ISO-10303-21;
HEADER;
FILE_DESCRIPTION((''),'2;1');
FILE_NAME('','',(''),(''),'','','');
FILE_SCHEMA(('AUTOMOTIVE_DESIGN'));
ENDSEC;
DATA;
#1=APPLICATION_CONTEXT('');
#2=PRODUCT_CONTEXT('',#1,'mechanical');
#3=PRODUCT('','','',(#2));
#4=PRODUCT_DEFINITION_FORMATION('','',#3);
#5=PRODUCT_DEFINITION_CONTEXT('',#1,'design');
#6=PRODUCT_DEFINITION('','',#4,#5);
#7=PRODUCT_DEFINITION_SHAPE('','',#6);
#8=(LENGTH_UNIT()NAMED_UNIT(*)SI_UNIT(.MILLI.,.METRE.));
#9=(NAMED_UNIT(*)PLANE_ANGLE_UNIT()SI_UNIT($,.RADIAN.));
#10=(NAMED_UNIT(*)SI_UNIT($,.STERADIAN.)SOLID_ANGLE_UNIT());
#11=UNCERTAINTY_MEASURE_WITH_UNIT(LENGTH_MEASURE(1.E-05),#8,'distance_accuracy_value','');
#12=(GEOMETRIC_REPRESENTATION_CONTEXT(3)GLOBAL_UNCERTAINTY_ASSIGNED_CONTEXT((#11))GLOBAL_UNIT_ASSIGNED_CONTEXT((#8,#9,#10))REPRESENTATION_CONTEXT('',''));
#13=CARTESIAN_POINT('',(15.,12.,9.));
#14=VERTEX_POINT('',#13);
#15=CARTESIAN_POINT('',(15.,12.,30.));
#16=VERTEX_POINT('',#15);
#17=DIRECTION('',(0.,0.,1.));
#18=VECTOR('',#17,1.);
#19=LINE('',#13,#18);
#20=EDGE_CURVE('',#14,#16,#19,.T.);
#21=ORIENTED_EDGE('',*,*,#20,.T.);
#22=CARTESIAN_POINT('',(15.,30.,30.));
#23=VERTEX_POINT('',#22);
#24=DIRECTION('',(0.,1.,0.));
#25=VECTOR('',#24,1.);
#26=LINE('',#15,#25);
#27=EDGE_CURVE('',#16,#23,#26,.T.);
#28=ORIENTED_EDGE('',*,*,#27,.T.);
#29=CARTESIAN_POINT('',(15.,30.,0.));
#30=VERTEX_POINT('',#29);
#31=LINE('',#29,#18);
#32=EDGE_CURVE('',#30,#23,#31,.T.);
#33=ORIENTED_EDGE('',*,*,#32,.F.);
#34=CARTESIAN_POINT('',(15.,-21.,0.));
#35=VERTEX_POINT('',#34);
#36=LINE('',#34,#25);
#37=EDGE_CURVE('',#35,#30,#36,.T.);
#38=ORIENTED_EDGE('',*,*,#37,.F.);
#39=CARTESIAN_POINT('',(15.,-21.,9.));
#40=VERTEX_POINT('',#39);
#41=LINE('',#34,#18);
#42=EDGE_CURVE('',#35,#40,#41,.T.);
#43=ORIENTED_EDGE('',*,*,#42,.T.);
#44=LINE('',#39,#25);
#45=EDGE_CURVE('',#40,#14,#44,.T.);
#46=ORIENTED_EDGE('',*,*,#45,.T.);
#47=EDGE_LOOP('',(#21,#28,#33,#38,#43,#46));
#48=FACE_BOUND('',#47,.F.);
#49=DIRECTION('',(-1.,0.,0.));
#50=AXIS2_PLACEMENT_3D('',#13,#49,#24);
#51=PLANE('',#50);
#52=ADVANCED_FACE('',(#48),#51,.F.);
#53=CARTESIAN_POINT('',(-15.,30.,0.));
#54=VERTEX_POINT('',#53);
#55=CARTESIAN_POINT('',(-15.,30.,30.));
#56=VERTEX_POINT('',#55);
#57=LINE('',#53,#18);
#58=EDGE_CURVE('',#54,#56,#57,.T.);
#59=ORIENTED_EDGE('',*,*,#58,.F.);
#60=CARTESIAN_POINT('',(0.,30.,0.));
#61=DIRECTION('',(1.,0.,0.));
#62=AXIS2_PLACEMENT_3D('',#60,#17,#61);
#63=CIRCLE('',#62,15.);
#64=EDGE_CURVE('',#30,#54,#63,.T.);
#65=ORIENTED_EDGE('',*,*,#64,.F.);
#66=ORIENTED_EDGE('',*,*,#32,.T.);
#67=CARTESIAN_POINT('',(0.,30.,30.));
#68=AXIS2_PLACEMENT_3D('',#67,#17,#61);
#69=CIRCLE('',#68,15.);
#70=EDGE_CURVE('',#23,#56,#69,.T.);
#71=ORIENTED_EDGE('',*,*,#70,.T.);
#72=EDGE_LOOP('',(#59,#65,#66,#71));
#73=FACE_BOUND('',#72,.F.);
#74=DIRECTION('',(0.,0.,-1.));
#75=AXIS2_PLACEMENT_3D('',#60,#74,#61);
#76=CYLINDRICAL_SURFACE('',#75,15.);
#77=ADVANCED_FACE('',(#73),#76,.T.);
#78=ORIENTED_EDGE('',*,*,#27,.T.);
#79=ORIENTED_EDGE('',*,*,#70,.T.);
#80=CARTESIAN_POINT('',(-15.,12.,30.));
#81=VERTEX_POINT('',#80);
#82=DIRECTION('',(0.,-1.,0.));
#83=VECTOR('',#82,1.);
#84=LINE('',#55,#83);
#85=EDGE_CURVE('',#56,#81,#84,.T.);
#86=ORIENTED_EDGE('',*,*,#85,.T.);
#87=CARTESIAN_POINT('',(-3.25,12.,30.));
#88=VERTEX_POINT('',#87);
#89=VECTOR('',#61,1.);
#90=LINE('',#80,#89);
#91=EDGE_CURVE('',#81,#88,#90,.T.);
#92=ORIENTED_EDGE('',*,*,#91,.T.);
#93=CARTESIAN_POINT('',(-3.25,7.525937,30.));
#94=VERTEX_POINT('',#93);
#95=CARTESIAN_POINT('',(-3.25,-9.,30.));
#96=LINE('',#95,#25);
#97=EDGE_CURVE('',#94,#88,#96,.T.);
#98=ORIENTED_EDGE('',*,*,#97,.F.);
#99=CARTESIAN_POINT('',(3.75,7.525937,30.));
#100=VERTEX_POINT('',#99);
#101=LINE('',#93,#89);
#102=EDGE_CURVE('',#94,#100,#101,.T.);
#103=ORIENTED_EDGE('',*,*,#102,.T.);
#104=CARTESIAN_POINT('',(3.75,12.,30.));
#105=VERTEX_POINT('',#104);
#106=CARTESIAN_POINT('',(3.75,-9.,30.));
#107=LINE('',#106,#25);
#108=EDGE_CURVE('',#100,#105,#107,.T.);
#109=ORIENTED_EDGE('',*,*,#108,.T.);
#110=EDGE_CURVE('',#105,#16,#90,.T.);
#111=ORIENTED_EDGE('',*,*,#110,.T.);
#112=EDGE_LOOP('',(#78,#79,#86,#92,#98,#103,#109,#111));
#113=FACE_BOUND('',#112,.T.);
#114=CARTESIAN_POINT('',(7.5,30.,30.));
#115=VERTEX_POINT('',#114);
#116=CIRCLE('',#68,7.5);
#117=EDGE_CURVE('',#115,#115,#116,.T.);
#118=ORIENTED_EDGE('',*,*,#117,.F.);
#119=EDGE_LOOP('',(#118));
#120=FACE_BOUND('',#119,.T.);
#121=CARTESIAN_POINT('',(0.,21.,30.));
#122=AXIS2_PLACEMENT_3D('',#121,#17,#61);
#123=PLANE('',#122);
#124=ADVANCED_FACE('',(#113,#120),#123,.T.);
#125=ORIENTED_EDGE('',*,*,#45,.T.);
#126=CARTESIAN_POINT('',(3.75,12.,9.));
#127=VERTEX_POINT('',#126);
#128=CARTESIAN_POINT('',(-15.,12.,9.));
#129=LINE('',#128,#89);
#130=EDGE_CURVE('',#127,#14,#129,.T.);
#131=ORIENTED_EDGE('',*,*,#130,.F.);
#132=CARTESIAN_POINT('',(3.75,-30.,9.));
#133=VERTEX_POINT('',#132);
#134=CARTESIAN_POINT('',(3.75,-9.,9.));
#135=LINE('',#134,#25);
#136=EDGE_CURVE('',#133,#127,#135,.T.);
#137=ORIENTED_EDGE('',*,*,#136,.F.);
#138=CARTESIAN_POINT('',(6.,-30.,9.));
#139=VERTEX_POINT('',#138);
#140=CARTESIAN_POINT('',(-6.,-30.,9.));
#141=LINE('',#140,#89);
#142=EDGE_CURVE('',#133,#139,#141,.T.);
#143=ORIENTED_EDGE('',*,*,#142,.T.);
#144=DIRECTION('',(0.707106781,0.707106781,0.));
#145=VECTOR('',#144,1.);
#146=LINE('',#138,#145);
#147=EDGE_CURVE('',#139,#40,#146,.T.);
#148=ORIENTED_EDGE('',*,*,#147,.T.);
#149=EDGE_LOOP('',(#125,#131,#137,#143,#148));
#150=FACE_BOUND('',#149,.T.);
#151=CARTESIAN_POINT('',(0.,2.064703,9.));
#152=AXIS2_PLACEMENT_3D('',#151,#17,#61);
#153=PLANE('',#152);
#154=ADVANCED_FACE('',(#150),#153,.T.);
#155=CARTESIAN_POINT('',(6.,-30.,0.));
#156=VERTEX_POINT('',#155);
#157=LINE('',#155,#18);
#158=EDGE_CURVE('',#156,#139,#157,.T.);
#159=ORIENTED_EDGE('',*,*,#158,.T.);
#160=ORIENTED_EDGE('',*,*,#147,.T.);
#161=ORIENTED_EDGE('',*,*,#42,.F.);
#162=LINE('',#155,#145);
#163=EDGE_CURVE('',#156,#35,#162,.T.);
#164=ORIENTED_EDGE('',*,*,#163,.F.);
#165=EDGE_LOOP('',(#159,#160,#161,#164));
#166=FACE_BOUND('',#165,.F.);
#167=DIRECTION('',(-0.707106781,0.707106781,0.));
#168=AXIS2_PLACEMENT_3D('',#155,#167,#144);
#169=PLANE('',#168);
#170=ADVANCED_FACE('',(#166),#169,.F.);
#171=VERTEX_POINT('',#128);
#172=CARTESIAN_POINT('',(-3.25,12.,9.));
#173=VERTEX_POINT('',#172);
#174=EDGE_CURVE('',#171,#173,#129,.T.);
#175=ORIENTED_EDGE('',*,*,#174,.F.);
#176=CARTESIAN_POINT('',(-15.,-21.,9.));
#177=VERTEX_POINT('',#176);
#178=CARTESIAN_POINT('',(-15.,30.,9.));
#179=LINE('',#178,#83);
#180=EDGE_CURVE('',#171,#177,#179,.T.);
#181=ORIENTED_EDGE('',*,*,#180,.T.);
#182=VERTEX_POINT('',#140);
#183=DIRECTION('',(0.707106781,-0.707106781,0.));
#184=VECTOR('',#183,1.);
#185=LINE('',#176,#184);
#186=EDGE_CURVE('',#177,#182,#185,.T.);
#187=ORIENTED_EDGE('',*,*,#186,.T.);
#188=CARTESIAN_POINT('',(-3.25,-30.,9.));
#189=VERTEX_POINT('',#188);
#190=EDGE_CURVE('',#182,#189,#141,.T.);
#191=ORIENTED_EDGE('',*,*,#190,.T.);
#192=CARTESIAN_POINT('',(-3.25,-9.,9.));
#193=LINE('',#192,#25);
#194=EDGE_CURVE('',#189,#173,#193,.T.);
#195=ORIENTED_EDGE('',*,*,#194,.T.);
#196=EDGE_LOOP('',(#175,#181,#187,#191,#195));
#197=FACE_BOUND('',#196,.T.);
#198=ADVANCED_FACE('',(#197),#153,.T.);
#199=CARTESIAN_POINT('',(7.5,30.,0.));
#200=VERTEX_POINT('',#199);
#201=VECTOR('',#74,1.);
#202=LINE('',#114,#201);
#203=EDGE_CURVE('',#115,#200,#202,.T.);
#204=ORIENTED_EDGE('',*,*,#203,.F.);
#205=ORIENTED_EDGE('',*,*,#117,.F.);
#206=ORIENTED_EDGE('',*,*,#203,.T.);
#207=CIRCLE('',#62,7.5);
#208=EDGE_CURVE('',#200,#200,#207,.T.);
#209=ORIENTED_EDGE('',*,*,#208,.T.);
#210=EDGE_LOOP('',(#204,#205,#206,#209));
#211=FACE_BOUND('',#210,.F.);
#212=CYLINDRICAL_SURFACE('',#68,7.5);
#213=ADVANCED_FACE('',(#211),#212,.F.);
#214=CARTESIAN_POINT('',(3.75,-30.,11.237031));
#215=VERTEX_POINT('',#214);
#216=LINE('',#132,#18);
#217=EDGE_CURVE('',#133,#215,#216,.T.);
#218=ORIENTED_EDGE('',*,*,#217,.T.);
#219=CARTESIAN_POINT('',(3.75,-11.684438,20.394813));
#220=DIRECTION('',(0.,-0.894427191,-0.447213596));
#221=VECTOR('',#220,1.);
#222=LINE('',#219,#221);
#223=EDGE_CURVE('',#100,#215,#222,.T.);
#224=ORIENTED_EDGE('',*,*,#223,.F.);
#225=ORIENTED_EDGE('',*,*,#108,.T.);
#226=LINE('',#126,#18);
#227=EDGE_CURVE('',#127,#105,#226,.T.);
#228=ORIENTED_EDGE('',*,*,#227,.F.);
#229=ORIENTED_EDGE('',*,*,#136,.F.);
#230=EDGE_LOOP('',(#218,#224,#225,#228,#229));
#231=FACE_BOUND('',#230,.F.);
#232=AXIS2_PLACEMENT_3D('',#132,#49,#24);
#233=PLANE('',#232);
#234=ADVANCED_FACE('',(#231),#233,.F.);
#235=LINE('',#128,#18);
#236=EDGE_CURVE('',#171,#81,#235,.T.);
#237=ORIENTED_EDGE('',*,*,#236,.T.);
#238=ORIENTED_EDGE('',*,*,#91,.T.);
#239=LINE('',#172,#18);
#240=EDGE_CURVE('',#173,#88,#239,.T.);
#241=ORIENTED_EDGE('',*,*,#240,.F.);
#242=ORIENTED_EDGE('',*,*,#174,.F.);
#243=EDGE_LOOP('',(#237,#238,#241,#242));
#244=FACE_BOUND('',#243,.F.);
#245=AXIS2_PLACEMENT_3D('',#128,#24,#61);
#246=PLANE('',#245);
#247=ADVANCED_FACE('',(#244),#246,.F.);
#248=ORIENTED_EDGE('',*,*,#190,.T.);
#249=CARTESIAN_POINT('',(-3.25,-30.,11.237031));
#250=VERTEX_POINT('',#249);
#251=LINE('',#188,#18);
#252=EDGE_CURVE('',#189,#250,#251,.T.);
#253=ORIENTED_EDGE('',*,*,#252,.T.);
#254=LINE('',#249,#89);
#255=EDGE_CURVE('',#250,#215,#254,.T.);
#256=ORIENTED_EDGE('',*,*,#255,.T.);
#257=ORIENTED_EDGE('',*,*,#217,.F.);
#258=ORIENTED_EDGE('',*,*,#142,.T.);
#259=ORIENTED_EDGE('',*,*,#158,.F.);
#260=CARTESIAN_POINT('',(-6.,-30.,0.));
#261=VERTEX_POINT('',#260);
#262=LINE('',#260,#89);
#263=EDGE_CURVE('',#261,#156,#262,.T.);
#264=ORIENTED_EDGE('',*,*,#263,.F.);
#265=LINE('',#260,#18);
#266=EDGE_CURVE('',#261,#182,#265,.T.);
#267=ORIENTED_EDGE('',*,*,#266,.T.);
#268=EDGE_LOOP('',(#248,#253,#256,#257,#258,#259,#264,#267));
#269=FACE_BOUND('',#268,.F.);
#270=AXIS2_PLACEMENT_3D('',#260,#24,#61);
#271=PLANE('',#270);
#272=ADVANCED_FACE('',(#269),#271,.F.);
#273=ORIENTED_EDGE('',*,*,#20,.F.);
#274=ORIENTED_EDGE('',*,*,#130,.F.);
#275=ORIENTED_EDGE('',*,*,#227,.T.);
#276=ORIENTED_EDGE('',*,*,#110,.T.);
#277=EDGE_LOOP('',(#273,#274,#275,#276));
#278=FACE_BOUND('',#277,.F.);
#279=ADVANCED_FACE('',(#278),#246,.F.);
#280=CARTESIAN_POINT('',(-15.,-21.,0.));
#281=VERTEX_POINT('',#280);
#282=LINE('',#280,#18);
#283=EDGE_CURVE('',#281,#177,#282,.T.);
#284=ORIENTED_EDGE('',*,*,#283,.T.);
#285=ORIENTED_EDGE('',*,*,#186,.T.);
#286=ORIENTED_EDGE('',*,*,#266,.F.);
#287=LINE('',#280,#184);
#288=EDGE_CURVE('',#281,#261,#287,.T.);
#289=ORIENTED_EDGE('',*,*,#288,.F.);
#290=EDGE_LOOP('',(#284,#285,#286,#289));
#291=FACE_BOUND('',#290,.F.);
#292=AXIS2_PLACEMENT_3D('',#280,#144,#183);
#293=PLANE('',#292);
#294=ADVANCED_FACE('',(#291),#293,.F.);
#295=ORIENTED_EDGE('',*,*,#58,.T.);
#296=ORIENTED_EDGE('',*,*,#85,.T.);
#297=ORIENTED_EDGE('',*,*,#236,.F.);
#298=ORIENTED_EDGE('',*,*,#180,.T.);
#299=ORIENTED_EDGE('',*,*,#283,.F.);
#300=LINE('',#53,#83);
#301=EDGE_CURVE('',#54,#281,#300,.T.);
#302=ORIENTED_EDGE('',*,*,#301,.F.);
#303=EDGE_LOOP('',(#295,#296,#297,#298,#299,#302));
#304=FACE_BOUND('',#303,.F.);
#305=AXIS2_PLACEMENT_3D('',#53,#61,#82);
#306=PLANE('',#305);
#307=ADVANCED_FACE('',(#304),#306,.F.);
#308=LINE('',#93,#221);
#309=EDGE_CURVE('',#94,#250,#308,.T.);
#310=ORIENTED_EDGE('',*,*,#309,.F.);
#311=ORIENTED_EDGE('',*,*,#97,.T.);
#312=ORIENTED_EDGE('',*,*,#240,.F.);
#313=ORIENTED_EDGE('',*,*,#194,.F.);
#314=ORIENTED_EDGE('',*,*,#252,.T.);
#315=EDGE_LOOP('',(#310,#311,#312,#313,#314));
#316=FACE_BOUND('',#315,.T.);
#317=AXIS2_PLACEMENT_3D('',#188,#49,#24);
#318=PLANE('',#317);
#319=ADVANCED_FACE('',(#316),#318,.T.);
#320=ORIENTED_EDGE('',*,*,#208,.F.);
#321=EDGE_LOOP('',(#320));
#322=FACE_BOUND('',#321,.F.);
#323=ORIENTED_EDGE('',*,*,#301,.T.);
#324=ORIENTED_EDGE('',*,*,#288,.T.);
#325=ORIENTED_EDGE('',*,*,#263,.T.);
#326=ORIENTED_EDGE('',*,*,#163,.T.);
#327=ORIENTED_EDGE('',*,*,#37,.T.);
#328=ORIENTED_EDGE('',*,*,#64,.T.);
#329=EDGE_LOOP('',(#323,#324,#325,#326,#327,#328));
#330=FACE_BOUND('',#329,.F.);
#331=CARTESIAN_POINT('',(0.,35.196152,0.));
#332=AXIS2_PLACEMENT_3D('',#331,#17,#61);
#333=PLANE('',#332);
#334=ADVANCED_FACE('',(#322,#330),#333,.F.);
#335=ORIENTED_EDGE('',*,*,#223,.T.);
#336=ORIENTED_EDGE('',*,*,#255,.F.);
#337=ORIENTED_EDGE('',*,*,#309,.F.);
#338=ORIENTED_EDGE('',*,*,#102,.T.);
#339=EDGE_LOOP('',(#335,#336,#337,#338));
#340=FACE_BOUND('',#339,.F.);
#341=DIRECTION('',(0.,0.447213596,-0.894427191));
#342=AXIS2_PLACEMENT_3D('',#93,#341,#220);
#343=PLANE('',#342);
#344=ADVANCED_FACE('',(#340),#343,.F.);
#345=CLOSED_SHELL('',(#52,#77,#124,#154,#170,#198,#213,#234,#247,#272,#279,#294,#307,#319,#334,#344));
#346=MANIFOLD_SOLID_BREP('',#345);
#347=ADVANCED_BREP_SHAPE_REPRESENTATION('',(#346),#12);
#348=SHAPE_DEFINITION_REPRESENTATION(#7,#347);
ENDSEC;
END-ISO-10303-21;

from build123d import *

# Parameters (mm, degrees)
F1_DEPTH  = 9
F2_W      = 7
F2_H      = 42
F3_DEPTH  = 21
F5_DEPTH  = 25
F7_DEPTH  = 30
F8_DEPTH  = 21
F9_R      = 7.5
F10_DEPTH = 30


with BuildPart() as f1:
    # F0 (on Top) → F1 (new body)
    with BuildSketch(Plane.XY):
        Polygon((15, 30), (-15, 30), (-15, -21), (-6, -30), (6, -30), (15, -21), align=None)
    extrude(amount=F1_DEPTH)

    # F2 (on face) → F3 (join)
    with BuildSketch(Plane.XY.offset(9)):
        with Locations((0.25, -9)):
            Rectangle(F2_W, F2_H)
    extrude(amount=F3_DEPTH)

    # F4 (on face) → F5 (cut)
    with BuildSketch(Plane(origin=(-3.25, 0, 0), x_dir=(0, -1, 0), z_dir=(-1, 0, 0))):
        Polygon((30, 30), (-7.5259371102, 30), (30, 11.2370314449), align=None)
    extrude(amount=-F5_DEPTH, mode=Mode.SUBTRACT)

    # F0 (on Top) → F7 (join)
    with BuildSketch(Plane.XY):
        with BuildLine():
            ThreePointArc((15, 30), (0, 45), (-15, 30))
            Line((-15, 30), (15, 30))
        make_face()
    extrude(amount=F7_DEPTH)

    # F6 (on face) → F8 (join)
    with BuildSketch(Plane.XY.offset(9)):
        Polygon((3.75, 12), (15, 12), (15, 30), (-15, 30), (-15, 12), (-3.25, 12), align=None)
    extrude(amount=F8_DEPTH)

    # F9 (on face) → F10 (cut)
    with BuildSketch(Plane.XY.offset(30)):
        with Locations((0, 30)):
            Circle(F9_R)
    extrude(amount=-F10_DEPTH, mode=Mode.SUBTRACT)


solid = f1.part
